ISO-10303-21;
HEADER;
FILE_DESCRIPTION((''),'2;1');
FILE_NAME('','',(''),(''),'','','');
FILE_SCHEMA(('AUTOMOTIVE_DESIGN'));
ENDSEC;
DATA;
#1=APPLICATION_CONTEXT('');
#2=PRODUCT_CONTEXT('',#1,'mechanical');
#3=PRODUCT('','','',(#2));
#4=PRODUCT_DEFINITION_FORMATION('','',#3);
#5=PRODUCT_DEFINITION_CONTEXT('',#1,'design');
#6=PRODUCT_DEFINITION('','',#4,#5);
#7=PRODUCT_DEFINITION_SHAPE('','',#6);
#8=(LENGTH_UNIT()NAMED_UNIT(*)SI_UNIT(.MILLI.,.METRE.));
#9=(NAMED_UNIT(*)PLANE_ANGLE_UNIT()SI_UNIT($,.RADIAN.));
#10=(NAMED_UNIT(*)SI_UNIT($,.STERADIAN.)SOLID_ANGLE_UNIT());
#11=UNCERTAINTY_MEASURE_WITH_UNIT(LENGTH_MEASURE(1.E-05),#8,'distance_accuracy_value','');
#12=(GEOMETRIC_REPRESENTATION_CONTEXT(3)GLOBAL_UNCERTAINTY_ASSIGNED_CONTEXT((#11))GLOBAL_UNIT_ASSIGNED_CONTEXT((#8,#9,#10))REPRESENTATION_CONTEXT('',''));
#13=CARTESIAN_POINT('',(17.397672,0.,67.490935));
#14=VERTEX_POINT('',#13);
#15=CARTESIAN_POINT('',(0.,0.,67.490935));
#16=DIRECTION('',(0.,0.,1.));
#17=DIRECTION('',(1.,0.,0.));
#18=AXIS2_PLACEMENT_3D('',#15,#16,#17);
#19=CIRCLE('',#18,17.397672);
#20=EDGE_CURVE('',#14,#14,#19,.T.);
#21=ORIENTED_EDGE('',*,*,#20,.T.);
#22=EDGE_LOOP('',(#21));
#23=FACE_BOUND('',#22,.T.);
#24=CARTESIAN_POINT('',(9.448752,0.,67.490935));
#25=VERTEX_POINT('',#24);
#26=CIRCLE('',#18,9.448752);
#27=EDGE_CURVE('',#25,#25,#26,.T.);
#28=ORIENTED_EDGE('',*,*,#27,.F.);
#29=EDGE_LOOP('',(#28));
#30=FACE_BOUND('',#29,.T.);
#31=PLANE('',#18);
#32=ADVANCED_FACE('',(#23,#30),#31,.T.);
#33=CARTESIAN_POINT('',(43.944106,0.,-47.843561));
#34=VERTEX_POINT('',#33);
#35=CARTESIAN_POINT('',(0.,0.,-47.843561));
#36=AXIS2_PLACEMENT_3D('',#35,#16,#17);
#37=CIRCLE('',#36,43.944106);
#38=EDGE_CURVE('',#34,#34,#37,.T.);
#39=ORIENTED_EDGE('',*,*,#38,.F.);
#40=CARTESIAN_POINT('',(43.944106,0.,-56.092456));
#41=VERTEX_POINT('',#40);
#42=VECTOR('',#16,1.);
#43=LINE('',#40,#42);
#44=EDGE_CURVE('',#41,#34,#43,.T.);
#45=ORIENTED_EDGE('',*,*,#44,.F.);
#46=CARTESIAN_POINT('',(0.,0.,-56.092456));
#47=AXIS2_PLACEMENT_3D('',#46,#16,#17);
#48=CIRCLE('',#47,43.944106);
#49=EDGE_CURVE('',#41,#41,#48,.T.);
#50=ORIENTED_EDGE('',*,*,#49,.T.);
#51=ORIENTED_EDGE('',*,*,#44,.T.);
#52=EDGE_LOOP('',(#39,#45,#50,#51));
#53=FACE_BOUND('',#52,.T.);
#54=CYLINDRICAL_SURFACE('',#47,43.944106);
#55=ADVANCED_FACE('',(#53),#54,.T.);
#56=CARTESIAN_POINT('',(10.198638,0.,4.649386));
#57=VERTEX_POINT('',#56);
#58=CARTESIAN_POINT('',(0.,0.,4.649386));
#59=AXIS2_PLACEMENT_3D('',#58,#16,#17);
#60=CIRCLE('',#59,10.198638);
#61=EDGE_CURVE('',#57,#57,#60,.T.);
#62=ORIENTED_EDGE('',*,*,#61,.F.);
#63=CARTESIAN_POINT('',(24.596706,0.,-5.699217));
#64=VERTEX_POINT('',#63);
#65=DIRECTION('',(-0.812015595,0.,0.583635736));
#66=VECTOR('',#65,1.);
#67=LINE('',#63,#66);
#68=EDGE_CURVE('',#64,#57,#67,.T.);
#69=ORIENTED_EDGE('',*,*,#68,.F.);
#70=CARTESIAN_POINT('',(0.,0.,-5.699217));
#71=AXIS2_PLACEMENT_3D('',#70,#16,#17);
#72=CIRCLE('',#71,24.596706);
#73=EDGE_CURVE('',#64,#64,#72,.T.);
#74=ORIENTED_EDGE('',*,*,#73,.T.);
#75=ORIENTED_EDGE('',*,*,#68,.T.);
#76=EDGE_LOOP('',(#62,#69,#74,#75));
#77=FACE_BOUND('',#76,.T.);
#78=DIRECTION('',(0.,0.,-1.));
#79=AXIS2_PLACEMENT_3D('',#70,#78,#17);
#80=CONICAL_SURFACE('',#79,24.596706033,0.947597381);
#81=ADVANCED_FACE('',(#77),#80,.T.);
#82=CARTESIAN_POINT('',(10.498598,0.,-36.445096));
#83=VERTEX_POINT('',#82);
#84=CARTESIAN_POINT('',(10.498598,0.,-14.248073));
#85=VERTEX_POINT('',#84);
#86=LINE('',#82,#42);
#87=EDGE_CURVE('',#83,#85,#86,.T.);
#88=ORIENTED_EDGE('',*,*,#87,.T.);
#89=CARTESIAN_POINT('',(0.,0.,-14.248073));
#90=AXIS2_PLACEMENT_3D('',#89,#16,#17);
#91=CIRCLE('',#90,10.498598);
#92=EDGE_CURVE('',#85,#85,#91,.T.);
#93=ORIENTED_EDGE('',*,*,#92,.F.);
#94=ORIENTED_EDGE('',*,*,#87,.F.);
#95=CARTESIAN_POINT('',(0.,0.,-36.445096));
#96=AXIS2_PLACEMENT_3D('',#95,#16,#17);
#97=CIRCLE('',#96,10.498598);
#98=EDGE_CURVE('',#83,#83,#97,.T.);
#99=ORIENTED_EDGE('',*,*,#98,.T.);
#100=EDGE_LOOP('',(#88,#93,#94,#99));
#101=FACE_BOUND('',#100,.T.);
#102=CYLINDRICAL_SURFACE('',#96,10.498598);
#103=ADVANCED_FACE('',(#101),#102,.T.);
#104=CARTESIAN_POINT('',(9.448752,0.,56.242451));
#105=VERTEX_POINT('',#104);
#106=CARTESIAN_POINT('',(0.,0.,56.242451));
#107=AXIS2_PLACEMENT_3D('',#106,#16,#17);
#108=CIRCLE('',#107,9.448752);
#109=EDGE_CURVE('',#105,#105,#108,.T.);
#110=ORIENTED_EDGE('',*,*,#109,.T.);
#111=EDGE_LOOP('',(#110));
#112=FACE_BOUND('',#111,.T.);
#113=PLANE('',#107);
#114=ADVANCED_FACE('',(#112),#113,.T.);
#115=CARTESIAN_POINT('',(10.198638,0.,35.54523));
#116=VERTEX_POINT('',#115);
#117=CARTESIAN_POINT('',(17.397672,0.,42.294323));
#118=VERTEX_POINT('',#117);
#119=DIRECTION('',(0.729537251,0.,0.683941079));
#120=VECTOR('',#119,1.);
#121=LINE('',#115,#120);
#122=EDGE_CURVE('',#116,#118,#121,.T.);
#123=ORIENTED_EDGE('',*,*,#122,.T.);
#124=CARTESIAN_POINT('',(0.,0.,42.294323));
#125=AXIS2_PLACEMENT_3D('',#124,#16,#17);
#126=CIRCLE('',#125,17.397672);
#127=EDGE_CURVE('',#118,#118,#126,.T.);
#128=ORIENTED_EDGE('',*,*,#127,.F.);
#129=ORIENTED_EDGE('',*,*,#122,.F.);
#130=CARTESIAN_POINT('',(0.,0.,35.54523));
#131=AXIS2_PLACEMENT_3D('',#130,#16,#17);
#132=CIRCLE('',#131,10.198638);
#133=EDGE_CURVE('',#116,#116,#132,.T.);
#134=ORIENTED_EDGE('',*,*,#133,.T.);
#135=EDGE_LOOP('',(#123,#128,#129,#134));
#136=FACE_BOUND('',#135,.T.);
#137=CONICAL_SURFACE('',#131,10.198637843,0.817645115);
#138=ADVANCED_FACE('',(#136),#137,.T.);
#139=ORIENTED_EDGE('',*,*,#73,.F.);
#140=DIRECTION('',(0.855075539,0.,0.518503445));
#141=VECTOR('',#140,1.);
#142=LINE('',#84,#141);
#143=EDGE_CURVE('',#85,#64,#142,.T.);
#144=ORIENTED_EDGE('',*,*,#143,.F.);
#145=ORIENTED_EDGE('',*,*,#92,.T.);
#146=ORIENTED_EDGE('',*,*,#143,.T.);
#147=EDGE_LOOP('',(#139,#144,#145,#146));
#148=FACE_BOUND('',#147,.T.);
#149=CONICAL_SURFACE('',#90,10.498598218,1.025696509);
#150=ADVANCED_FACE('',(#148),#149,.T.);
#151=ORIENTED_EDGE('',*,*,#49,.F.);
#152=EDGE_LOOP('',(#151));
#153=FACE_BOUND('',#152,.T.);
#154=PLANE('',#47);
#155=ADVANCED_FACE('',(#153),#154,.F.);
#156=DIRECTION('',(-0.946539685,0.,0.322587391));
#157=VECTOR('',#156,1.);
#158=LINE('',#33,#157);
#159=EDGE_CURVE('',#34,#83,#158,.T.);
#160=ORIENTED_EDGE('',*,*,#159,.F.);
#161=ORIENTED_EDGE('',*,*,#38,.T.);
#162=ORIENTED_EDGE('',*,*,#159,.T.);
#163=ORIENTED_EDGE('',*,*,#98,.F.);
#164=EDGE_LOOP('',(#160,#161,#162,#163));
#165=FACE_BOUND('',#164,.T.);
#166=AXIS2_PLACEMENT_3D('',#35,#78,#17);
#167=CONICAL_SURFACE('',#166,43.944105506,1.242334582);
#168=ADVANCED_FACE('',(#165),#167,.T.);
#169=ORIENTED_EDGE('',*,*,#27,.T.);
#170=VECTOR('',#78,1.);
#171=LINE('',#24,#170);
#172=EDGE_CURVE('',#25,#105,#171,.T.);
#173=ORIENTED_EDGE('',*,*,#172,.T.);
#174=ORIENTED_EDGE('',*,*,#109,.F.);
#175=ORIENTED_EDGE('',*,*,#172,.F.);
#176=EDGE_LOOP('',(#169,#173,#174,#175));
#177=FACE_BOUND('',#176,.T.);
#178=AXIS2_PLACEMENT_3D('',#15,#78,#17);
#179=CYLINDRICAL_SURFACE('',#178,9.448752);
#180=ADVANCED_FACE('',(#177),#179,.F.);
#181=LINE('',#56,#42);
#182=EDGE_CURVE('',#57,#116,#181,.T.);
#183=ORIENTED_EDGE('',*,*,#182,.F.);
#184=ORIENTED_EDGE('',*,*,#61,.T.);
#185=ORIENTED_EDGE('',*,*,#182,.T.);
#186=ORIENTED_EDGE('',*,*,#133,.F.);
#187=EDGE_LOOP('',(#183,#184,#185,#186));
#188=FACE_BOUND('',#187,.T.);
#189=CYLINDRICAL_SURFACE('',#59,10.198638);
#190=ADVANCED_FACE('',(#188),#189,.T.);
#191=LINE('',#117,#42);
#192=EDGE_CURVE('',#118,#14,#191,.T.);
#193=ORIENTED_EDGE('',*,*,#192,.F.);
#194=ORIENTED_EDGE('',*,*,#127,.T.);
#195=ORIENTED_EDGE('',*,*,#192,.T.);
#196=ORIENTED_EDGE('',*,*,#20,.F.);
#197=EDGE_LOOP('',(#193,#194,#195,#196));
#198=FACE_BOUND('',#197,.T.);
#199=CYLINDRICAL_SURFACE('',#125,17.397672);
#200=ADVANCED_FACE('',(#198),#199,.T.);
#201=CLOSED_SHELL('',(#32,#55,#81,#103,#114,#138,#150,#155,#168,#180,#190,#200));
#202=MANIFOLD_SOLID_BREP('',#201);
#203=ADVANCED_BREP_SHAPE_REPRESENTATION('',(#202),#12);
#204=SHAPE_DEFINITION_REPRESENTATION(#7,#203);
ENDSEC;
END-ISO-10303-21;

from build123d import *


# Not quite as in the source:
# - the program builds the solid bodies; features that only make, move or delete a surface that nothing else refers to are left out


with BuildPart() as f1:
    # F0 (on Front) → F1 (revolve)
    with BuildSketch(Plane.XZ):
        Polygon((9.4487518072, 56.2424510717), (0, 56.2424510717), (0, -56.0924559832), (43.9441055059, -56.0924559832), (43.9441055059, -47.8435605764), (10.498598218, -36.4450961351), (10.498598218, -14.248073101), (24.5967060328, -5.6992173195), (10.1986378431, 4.6493858099), (10.1986378431, 35.5452299118), (17.3976719379, 42.2943234444), (17.3976719379, 67.4909353256), (9.4487518072, 67.4909353256), align=None)
    revolve(axis=Axis((0, 0, 0.0749975443), (0, 0, 1)))


solid = f1.part
